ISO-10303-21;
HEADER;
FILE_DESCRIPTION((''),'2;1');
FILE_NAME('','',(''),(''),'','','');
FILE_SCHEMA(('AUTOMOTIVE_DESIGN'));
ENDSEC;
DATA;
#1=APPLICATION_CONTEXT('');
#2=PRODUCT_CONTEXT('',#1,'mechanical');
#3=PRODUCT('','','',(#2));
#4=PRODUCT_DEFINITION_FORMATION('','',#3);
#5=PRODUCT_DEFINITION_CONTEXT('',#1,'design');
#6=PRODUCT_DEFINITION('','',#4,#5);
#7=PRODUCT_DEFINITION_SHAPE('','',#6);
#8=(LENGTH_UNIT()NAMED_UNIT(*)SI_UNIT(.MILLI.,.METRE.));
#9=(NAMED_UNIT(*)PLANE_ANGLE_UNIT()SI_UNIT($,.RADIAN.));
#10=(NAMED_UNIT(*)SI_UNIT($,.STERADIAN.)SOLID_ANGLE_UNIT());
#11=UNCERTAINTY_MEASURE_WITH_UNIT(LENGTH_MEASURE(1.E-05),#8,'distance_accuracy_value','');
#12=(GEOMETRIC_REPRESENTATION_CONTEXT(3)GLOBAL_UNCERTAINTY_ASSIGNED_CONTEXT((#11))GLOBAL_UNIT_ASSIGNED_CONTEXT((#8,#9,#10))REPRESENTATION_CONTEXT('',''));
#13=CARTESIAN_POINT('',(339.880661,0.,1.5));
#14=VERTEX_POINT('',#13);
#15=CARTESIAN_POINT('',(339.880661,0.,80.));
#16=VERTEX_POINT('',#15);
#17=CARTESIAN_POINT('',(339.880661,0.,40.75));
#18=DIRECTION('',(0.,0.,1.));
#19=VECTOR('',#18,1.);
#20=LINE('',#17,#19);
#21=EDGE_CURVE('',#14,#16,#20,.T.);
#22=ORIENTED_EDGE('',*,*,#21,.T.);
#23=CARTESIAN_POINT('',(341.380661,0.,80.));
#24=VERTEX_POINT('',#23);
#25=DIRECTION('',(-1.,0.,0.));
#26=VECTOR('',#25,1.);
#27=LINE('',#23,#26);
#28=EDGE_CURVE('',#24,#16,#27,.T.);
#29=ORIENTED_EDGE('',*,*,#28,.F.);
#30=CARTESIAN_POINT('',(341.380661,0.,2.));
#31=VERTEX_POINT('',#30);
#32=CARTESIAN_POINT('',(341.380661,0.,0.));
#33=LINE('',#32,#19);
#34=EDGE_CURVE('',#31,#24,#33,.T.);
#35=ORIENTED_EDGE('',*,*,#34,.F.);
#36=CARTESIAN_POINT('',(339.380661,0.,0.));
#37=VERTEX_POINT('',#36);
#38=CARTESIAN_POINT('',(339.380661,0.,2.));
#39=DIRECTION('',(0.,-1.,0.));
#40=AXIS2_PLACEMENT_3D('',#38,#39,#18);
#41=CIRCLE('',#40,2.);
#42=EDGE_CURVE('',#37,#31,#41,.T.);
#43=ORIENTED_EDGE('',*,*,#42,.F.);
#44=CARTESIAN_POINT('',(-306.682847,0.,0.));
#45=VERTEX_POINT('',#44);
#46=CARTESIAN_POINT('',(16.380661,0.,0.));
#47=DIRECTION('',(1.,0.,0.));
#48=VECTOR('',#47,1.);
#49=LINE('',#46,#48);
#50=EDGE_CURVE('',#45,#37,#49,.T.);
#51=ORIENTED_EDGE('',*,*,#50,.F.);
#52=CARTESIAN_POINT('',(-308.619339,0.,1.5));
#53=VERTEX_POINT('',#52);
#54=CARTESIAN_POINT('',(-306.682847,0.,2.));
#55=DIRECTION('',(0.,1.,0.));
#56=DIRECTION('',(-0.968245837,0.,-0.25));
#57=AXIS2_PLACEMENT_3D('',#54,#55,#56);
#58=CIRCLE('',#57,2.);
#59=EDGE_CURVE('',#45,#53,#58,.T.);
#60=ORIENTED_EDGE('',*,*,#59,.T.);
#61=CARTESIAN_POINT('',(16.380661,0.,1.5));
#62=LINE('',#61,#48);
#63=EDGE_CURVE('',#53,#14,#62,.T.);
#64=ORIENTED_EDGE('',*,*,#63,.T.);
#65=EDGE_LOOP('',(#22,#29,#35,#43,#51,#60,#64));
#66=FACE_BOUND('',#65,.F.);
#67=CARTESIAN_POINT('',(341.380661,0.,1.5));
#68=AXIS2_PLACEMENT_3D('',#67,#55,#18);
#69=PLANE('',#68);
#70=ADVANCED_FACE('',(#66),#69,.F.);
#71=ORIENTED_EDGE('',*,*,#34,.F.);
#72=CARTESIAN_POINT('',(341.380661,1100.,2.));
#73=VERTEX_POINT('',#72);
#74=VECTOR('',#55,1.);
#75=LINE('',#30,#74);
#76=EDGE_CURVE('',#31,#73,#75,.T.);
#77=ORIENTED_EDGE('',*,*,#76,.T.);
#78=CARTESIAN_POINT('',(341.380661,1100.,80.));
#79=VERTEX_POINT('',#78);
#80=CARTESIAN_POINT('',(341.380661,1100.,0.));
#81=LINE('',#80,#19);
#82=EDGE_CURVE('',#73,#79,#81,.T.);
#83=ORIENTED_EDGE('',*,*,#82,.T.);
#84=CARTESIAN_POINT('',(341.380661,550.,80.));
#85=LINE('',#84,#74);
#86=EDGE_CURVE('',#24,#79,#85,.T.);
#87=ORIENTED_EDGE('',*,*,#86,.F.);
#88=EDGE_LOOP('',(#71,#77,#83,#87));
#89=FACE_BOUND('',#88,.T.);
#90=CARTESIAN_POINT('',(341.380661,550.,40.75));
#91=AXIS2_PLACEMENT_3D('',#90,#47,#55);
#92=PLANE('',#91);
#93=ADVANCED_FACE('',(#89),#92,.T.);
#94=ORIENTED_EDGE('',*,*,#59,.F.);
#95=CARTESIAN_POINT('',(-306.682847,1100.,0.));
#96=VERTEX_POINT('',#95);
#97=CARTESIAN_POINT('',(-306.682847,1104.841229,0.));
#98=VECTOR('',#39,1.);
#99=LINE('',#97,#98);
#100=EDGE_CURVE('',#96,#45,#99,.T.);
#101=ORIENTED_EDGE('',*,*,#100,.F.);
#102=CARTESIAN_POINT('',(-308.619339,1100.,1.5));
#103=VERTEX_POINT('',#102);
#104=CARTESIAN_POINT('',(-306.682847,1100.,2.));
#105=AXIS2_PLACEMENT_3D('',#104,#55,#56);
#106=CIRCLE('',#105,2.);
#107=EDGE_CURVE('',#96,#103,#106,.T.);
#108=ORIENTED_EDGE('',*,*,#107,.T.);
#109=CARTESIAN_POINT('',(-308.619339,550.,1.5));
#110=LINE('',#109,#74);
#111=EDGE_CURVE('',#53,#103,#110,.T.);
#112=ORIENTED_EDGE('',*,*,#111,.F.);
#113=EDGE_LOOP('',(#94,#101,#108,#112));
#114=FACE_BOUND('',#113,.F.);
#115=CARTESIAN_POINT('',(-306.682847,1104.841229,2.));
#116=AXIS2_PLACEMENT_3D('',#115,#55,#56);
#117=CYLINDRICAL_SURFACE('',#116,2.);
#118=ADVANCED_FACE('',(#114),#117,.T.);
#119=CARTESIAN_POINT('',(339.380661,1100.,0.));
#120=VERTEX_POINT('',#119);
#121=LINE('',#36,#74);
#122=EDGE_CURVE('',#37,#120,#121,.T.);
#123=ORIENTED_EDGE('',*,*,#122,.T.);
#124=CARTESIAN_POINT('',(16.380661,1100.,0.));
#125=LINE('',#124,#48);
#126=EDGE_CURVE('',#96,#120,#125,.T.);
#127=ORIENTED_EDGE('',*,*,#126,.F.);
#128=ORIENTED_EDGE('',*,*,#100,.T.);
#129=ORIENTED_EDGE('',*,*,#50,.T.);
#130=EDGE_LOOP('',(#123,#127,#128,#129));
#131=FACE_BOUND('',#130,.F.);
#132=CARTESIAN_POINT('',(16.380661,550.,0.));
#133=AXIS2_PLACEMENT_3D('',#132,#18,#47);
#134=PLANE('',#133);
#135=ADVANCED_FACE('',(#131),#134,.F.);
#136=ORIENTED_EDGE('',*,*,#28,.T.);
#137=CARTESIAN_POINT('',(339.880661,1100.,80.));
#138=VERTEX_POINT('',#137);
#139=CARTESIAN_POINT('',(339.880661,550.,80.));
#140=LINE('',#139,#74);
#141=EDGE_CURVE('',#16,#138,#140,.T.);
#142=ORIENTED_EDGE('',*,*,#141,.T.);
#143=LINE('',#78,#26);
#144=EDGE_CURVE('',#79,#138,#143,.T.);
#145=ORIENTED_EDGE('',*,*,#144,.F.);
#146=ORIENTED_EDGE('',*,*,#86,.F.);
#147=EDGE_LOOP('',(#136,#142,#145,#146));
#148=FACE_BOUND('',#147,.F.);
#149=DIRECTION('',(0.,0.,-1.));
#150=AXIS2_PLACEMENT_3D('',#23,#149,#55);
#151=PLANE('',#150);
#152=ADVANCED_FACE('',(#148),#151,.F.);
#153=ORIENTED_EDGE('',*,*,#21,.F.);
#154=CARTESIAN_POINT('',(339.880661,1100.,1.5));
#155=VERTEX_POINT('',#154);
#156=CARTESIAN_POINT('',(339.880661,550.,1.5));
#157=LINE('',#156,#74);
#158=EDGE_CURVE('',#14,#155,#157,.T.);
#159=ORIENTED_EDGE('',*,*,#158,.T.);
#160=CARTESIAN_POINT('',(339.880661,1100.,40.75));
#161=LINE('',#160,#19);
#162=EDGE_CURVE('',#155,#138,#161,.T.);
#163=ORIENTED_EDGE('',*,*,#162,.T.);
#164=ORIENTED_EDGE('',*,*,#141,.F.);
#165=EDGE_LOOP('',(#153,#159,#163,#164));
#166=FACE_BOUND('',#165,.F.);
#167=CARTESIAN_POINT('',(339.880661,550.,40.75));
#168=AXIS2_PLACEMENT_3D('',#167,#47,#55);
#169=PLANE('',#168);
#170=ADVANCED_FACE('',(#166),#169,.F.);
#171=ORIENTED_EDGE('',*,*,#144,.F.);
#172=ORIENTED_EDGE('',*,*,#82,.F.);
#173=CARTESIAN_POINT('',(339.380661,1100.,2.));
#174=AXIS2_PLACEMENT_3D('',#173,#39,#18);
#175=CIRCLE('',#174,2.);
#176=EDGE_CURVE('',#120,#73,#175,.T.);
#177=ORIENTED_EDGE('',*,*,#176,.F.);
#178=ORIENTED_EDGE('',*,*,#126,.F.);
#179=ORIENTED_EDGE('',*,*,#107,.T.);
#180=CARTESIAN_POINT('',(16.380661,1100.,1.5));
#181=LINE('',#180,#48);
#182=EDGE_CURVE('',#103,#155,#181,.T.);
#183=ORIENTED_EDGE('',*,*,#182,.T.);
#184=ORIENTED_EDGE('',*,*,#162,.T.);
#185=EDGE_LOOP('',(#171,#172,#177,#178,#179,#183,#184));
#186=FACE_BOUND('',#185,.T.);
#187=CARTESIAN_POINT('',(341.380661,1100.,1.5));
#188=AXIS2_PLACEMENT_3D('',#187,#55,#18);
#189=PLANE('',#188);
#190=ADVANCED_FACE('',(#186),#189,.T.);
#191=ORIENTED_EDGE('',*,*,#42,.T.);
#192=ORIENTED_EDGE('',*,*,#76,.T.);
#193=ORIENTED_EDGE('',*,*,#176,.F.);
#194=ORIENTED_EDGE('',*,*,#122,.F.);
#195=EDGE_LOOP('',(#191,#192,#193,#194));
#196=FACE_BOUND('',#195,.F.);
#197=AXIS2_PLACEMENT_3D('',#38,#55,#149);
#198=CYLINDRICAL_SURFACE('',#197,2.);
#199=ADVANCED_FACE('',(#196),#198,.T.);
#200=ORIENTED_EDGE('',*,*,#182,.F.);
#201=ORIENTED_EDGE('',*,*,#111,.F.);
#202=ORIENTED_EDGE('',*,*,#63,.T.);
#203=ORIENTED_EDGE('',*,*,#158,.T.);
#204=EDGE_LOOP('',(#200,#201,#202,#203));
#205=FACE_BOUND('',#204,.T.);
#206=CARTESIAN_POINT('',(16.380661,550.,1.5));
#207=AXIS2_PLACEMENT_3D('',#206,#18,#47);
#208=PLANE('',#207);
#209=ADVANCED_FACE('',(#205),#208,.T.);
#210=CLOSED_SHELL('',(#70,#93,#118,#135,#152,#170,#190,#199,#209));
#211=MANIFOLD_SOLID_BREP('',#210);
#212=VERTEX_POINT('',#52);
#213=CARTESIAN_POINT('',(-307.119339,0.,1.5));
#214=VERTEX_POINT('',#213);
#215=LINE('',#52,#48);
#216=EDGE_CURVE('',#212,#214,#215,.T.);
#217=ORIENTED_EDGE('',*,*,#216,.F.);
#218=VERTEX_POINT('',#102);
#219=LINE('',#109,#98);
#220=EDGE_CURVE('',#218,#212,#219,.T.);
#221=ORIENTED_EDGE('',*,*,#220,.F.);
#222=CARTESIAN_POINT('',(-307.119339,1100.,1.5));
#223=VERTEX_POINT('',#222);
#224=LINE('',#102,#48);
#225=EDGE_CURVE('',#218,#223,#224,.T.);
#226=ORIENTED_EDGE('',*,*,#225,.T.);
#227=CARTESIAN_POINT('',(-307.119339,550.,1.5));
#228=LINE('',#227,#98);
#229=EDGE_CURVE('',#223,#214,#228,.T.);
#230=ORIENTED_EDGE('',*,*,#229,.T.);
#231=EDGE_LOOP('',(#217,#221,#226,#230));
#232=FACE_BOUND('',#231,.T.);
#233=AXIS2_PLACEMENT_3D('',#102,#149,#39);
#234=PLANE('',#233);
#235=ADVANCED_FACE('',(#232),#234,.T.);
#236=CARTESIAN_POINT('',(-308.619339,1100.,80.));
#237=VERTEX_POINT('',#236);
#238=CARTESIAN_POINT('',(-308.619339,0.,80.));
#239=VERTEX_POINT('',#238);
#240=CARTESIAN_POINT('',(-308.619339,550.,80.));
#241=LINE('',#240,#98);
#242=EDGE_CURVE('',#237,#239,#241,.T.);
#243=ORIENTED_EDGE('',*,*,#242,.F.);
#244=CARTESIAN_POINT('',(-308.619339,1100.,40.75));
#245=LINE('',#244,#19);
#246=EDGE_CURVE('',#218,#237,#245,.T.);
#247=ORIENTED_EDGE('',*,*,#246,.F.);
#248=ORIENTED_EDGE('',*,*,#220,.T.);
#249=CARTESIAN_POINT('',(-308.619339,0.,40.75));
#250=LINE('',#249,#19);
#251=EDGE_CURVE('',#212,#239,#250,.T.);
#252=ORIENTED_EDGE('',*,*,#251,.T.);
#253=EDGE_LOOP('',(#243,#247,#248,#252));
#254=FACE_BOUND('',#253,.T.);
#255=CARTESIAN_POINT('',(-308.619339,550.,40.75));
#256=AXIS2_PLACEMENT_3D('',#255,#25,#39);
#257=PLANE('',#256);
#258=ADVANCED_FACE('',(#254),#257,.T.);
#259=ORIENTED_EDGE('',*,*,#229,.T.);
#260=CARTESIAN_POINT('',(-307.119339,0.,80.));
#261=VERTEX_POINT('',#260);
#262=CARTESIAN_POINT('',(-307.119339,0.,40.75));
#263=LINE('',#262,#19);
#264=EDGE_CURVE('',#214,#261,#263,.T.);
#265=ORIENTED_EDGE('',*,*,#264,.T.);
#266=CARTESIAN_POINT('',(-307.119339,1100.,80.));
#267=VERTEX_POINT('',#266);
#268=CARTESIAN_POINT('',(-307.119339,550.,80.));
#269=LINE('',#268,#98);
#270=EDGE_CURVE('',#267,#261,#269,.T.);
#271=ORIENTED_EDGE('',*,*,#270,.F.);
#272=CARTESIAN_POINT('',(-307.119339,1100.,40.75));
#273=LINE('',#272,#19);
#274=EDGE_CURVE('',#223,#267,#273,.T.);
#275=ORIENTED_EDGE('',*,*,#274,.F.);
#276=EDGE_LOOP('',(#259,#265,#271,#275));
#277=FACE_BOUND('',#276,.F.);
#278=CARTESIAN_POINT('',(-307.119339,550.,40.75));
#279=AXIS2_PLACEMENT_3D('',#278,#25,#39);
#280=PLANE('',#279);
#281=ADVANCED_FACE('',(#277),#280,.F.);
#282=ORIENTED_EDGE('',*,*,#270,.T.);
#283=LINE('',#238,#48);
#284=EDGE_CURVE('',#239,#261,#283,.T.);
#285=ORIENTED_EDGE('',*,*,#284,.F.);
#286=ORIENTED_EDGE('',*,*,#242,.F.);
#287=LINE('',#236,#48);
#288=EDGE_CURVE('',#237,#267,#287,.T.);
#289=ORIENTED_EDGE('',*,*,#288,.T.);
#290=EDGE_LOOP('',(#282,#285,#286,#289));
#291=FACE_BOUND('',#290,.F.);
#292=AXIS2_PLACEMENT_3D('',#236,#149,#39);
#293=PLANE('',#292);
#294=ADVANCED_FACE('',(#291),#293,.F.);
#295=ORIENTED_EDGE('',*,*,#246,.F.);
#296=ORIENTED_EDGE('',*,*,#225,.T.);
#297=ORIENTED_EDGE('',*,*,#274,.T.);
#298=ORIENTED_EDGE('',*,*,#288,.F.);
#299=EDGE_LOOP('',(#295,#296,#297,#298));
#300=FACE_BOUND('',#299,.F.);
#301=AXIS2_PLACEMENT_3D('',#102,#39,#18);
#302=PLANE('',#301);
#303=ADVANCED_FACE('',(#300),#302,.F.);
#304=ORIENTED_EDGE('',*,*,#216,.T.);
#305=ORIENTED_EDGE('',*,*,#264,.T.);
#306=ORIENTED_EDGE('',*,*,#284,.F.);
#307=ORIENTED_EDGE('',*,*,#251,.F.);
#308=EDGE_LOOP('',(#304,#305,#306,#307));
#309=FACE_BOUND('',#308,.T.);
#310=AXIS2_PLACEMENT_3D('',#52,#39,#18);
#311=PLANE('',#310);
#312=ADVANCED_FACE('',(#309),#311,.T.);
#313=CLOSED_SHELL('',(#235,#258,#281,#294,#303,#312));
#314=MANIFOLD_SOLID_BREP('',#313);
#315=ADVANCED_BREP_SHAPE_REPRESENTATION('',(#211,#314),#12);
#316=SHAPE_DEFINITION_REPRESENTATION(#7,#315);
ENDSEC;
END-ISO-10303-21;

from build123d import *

# Parameters (mm, degrees)
F0_W        = 650
F0_H        = 1100
F1_DEPTH    = 1.5
F2_W        = 1100
F2_H        = 78.5
F3_DEPTH    = 1.5
F4_T1_DEPTH = 1109.6824583655
F5_W        = 1100
F5_H        = 78.5
F6_DEPTH    = 1.5
F7_R        = 2


# Not quite as in the source:
# - a fillet or chamfer that OpenCascade refuses, or shapes differently, is made with other operations: its cross-section is extruded or revolved along the edge and cut away or added


with BuildPart() as f1:
    # F0 (on Top) → F1 (new body)
    with BuildSketch(Plane.XY):
        with Locations((16.3806613057, 550)):
            Rectangle(F0_W, F0_H)
    extrude(amount=F1_DEPTH)

    # F4: fillet of radius 2 on 1 edges, made by hand

    # F4_s2 → F4_t1 (cut)
    with BuildSketch(Plane.XZ.offset(-1104.8412291828)):
        with BuildLine():
            ThreePointArc((-308.6193386943, 1.5), (-307.9075918926, 0.4188611699), (-306.6828470212, 0))
            Line((-306.6828470212, 0), (-308.6193386943, 0))
            Line((-308.6193386943, 0), (-308.6193386943, 1.5))
        make_face()
    extrude(amount=F4_T1_DEPTH, mode=Mode.SUBTRACT)

    # F5 (on face) → F6 (join)
    with BuildSketch(Plane.YZ.offset(341.3806613057)):
        with Locations((550, 40.75)):
            Rectangle(F5_W, F5_H)
    extrude(amount=-F6_DEPTH)

    # F7
    f7_edges = [f1.edges().sort_by_distance(p)[0] for p in [
        (341.380661, 550, 0),
    ]]
    fillet(f7_edges, radius=F7_R)


with BuildPart() as f3:
    # F2 (on face) → F3 (new body)
    with BuildSketch(Plane(origin=(-308.6193386943, 0, 0), x_dir=(0, -1, 0), z_dir=(-1, 0, 0))):
        with Locations((-550, 40.75)):
            Rectangle(F2_W, F2_H)
    extrude(amount=-F3_DEPTH)


solid = Compound([f1.part, f3.part])
